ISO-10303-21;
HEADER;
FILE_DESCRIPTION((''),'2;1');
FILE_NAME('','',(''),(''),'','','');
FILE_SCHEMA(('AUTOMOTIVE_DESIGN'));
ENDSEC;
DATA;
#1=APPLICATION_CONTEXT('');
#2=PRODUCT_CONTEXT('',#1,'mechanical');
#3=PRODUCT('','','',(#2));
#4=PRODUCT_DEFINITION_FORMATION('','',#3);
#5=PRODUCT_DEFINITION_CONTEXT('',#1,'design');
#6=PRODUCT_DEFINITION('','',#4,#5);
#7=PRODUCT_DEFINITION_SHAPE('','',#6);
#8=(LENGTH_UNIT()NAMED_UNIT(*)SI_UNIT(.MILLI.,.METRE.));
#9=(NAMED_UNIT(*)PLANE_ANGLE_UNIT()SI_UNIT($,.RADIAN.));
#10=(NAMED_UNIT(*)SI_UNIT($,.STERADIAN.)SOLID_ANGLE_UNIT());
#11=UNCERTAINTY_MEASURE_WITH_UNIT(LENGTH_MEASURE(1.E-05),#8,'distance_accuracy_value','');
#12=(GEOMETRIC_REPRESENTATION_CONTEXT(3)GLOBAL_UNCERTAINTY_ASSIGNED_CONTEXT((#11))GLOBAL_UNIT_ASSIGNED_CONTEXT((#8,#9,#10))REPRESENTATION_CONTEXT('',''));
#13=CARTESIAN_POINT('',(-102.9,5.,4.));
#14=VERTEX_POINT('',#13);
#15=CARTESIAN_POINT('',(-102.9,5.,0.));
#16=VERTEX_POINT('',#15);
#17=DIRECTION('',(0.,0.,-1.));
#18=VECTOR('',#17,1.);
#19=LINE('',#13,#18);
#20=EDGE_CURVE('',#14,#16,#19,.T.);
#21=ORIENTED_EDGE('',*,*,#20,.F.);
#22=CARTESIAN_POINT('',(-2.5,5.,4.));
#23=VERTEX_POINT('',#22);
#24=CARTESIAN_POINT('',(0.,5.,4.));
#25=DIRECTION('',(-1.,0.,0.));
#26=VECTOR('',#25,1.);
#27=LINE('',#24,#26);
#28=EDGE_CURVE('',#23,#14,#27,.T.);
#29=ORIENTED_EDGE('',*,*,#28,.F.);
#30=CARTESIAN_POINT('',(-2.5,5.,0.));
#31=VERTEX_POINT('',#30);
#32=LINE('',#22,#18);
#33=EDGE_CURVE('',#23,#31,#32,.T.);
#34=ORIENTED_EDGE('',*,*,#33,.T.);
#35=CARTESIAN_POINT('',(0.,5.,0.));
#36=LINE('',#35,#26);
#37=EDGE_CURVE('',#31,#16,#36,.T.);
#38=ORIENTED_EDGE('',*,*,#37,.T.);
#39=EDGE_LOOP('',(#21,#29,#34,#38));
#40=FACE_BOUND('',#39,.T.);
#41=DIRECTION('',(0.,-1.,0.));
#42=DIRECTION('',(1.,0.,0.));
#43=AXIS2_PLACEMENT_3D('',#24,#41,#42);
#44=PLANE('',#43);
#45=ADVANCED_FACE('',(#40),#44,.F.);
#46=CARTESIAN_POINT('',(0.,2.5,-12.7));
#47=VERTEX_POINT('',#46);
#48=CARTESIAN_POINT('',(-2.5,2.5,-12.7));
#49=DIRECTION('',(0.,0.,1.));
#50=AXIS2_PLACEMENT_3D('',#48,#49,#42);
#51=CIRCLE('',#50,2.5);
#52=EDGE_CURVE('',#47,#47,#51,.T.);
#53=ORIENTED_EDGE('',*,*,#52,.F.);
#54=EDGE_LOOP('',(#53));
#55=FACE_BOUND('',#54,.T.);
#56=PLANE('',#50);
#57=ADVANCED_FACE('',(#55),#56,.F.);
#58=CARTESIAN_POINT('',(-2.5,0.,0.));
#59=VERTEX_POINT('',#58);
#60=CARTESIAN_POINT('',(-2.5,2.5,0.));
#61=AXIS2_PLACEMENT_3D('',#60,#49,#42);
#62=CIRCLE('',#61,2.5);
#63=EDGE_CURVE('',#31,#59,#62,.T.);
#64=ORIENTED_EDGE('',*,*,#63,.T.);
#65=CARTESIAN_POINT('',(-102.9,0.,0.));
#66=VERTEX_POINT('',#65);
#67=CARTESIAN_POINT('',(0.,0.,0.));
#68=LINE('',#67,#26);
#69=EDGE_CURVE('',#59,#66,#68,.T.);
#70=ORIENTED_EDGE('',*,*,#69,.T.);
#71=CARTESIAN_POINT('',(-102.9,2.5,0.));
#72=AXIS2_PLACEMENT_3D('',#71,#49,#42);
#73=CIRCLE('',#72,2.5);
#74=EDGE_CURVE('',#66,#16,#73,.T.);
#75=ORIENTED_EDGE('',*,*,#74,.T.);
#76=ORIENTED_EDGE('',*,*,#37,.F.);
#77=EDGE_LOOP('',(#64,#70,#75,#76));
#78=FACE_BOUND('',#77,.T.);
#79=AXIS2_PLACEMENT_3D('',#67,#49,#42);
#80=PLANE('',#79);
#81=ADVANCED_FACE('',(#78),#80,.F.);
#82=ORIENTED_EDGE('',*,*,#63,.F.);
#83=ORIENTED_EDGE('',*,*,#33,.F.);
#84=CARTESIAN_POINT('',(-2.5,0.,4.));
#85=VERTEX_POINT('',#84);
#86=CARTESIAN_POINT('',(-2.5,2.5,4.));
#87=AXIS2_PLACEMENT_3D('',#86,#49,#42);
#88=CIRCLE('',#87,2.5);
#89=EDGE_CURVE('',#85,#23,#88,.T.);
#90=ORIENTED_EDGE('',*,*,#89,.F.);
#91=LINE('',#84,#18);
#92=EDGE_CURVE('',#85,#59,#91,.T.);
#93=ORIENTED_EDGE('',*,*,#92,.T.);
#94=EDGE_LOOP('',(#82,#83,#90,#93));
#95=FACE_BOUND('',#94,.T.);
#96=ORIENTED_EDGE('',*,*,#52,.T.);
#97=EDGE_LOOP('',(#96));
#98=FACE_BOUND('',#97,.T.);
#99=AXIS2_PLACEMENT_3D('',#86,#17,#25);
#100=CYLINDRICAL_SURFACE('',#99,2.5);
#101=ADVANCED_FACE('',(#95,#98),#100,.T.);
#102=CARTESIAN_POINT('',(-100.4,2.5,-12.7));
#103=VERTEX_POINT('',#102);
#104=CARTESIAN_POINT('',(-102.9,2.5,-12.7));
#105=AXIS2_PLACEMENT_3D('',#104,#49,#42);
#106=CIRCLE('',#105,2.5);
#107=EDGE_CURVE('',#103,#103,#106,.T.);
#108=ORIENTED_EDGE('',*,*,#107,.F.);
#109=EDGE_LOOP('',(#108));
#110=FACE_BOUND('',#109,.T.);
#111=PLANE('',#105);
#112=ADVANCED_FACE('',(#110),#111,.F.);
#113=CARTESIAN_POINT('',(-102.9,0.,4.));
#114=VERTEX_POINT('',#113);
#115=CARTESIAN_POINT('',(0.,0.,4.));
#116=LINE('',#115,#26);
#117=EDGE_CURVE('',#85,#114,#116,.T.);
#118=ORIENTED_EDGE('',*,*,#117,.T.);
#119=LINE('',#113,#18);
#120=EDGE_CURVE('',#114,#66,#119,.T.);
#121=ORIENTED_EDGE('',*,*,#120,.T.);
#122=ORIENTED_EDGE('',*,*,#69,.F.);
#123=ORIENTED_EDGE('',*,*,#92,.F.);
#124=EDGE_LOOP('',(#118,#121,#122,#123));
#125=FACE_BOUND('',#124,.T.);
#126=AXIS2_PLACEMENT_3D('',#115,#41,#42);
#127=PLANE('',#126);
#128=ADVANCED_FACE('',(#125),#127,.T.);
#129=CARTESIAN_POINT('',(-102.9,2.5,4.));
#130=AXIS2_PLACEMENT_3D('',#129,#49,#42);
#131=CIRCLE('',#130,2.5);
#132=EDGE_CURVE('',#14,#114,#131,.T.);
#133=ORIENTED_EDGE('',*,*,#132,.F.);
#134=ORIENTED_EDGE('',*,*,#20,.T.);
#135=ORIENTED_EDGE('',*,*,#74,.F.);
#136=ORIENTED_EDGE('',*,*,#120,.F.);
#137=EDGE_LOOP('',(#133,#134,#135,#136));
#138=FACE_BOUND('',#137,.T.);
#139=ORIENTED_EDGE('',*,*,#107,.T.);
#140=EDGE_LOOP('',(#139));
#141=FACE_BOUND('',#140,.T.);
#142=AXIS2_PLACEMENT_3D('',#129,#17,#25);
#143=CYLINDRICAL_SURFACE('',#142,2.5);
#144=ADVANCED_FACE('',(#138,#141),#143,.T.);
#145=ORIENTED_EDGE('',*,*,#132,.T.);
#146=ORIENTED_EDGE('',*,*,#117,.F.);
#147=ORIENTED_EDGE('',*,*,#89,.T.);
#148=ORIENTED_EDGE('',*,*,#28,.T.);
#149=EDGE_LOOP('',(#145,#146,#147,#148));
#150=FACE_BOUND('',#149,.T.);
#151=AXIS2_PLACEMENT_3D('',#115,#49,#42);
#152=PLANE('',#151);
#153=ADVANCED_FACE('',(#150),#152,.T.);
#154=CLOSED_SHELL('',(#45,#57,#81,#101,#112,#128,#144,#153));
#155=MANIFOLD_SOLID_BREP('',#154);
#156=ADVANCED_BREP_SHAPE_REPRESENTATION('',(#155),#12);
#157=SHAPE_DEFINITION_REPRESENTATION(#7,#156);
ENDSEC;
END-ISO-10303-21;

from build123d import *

# Parameters (mm, degrees)
BOSS_EXTRUDE1_DEPTH = 4
BOSS_EXTRUDE2_START = -12.7
SKETCH1_3_R         = 2.5
BOSS_EXTRUDE2_DEPTH = 12.7


with BuildPart() as part:
    # Sketch1 → Boss-Extrude1 (new body)
    with BuildSketch(Plane.XY):
        with BuildLine():
            ThreePointArc((-102.9, 5), (-105.4, 2.5), (-102.9, 0))
            Line((-102.9, 0), (-2.500000007, 0))
            ThreePointArc((-2.500000007, 0), (0, 2.499999997), (-2.5, 5))
            Line((-2.5, 5), (-102.9, 5))
        make_face()
    extrude(amount=BOSS_EXTRUDE1_DEPTH)

    # Sketch1<3> → Boss-Extrude2 (add)
    with BuildSketch(Plane.XY.offset(BOSS_EXTRUDE2_START)):
        with Locations((-2.5, 2.5)):
            Circle(SKETCH1_3_R)
        with Locations((-102.9, 2.5)):
            Circle(SKETCH1_3_R)
    extrude(amount=BOSS_EXTRUDE2_DEPTH)


solid = part.part
